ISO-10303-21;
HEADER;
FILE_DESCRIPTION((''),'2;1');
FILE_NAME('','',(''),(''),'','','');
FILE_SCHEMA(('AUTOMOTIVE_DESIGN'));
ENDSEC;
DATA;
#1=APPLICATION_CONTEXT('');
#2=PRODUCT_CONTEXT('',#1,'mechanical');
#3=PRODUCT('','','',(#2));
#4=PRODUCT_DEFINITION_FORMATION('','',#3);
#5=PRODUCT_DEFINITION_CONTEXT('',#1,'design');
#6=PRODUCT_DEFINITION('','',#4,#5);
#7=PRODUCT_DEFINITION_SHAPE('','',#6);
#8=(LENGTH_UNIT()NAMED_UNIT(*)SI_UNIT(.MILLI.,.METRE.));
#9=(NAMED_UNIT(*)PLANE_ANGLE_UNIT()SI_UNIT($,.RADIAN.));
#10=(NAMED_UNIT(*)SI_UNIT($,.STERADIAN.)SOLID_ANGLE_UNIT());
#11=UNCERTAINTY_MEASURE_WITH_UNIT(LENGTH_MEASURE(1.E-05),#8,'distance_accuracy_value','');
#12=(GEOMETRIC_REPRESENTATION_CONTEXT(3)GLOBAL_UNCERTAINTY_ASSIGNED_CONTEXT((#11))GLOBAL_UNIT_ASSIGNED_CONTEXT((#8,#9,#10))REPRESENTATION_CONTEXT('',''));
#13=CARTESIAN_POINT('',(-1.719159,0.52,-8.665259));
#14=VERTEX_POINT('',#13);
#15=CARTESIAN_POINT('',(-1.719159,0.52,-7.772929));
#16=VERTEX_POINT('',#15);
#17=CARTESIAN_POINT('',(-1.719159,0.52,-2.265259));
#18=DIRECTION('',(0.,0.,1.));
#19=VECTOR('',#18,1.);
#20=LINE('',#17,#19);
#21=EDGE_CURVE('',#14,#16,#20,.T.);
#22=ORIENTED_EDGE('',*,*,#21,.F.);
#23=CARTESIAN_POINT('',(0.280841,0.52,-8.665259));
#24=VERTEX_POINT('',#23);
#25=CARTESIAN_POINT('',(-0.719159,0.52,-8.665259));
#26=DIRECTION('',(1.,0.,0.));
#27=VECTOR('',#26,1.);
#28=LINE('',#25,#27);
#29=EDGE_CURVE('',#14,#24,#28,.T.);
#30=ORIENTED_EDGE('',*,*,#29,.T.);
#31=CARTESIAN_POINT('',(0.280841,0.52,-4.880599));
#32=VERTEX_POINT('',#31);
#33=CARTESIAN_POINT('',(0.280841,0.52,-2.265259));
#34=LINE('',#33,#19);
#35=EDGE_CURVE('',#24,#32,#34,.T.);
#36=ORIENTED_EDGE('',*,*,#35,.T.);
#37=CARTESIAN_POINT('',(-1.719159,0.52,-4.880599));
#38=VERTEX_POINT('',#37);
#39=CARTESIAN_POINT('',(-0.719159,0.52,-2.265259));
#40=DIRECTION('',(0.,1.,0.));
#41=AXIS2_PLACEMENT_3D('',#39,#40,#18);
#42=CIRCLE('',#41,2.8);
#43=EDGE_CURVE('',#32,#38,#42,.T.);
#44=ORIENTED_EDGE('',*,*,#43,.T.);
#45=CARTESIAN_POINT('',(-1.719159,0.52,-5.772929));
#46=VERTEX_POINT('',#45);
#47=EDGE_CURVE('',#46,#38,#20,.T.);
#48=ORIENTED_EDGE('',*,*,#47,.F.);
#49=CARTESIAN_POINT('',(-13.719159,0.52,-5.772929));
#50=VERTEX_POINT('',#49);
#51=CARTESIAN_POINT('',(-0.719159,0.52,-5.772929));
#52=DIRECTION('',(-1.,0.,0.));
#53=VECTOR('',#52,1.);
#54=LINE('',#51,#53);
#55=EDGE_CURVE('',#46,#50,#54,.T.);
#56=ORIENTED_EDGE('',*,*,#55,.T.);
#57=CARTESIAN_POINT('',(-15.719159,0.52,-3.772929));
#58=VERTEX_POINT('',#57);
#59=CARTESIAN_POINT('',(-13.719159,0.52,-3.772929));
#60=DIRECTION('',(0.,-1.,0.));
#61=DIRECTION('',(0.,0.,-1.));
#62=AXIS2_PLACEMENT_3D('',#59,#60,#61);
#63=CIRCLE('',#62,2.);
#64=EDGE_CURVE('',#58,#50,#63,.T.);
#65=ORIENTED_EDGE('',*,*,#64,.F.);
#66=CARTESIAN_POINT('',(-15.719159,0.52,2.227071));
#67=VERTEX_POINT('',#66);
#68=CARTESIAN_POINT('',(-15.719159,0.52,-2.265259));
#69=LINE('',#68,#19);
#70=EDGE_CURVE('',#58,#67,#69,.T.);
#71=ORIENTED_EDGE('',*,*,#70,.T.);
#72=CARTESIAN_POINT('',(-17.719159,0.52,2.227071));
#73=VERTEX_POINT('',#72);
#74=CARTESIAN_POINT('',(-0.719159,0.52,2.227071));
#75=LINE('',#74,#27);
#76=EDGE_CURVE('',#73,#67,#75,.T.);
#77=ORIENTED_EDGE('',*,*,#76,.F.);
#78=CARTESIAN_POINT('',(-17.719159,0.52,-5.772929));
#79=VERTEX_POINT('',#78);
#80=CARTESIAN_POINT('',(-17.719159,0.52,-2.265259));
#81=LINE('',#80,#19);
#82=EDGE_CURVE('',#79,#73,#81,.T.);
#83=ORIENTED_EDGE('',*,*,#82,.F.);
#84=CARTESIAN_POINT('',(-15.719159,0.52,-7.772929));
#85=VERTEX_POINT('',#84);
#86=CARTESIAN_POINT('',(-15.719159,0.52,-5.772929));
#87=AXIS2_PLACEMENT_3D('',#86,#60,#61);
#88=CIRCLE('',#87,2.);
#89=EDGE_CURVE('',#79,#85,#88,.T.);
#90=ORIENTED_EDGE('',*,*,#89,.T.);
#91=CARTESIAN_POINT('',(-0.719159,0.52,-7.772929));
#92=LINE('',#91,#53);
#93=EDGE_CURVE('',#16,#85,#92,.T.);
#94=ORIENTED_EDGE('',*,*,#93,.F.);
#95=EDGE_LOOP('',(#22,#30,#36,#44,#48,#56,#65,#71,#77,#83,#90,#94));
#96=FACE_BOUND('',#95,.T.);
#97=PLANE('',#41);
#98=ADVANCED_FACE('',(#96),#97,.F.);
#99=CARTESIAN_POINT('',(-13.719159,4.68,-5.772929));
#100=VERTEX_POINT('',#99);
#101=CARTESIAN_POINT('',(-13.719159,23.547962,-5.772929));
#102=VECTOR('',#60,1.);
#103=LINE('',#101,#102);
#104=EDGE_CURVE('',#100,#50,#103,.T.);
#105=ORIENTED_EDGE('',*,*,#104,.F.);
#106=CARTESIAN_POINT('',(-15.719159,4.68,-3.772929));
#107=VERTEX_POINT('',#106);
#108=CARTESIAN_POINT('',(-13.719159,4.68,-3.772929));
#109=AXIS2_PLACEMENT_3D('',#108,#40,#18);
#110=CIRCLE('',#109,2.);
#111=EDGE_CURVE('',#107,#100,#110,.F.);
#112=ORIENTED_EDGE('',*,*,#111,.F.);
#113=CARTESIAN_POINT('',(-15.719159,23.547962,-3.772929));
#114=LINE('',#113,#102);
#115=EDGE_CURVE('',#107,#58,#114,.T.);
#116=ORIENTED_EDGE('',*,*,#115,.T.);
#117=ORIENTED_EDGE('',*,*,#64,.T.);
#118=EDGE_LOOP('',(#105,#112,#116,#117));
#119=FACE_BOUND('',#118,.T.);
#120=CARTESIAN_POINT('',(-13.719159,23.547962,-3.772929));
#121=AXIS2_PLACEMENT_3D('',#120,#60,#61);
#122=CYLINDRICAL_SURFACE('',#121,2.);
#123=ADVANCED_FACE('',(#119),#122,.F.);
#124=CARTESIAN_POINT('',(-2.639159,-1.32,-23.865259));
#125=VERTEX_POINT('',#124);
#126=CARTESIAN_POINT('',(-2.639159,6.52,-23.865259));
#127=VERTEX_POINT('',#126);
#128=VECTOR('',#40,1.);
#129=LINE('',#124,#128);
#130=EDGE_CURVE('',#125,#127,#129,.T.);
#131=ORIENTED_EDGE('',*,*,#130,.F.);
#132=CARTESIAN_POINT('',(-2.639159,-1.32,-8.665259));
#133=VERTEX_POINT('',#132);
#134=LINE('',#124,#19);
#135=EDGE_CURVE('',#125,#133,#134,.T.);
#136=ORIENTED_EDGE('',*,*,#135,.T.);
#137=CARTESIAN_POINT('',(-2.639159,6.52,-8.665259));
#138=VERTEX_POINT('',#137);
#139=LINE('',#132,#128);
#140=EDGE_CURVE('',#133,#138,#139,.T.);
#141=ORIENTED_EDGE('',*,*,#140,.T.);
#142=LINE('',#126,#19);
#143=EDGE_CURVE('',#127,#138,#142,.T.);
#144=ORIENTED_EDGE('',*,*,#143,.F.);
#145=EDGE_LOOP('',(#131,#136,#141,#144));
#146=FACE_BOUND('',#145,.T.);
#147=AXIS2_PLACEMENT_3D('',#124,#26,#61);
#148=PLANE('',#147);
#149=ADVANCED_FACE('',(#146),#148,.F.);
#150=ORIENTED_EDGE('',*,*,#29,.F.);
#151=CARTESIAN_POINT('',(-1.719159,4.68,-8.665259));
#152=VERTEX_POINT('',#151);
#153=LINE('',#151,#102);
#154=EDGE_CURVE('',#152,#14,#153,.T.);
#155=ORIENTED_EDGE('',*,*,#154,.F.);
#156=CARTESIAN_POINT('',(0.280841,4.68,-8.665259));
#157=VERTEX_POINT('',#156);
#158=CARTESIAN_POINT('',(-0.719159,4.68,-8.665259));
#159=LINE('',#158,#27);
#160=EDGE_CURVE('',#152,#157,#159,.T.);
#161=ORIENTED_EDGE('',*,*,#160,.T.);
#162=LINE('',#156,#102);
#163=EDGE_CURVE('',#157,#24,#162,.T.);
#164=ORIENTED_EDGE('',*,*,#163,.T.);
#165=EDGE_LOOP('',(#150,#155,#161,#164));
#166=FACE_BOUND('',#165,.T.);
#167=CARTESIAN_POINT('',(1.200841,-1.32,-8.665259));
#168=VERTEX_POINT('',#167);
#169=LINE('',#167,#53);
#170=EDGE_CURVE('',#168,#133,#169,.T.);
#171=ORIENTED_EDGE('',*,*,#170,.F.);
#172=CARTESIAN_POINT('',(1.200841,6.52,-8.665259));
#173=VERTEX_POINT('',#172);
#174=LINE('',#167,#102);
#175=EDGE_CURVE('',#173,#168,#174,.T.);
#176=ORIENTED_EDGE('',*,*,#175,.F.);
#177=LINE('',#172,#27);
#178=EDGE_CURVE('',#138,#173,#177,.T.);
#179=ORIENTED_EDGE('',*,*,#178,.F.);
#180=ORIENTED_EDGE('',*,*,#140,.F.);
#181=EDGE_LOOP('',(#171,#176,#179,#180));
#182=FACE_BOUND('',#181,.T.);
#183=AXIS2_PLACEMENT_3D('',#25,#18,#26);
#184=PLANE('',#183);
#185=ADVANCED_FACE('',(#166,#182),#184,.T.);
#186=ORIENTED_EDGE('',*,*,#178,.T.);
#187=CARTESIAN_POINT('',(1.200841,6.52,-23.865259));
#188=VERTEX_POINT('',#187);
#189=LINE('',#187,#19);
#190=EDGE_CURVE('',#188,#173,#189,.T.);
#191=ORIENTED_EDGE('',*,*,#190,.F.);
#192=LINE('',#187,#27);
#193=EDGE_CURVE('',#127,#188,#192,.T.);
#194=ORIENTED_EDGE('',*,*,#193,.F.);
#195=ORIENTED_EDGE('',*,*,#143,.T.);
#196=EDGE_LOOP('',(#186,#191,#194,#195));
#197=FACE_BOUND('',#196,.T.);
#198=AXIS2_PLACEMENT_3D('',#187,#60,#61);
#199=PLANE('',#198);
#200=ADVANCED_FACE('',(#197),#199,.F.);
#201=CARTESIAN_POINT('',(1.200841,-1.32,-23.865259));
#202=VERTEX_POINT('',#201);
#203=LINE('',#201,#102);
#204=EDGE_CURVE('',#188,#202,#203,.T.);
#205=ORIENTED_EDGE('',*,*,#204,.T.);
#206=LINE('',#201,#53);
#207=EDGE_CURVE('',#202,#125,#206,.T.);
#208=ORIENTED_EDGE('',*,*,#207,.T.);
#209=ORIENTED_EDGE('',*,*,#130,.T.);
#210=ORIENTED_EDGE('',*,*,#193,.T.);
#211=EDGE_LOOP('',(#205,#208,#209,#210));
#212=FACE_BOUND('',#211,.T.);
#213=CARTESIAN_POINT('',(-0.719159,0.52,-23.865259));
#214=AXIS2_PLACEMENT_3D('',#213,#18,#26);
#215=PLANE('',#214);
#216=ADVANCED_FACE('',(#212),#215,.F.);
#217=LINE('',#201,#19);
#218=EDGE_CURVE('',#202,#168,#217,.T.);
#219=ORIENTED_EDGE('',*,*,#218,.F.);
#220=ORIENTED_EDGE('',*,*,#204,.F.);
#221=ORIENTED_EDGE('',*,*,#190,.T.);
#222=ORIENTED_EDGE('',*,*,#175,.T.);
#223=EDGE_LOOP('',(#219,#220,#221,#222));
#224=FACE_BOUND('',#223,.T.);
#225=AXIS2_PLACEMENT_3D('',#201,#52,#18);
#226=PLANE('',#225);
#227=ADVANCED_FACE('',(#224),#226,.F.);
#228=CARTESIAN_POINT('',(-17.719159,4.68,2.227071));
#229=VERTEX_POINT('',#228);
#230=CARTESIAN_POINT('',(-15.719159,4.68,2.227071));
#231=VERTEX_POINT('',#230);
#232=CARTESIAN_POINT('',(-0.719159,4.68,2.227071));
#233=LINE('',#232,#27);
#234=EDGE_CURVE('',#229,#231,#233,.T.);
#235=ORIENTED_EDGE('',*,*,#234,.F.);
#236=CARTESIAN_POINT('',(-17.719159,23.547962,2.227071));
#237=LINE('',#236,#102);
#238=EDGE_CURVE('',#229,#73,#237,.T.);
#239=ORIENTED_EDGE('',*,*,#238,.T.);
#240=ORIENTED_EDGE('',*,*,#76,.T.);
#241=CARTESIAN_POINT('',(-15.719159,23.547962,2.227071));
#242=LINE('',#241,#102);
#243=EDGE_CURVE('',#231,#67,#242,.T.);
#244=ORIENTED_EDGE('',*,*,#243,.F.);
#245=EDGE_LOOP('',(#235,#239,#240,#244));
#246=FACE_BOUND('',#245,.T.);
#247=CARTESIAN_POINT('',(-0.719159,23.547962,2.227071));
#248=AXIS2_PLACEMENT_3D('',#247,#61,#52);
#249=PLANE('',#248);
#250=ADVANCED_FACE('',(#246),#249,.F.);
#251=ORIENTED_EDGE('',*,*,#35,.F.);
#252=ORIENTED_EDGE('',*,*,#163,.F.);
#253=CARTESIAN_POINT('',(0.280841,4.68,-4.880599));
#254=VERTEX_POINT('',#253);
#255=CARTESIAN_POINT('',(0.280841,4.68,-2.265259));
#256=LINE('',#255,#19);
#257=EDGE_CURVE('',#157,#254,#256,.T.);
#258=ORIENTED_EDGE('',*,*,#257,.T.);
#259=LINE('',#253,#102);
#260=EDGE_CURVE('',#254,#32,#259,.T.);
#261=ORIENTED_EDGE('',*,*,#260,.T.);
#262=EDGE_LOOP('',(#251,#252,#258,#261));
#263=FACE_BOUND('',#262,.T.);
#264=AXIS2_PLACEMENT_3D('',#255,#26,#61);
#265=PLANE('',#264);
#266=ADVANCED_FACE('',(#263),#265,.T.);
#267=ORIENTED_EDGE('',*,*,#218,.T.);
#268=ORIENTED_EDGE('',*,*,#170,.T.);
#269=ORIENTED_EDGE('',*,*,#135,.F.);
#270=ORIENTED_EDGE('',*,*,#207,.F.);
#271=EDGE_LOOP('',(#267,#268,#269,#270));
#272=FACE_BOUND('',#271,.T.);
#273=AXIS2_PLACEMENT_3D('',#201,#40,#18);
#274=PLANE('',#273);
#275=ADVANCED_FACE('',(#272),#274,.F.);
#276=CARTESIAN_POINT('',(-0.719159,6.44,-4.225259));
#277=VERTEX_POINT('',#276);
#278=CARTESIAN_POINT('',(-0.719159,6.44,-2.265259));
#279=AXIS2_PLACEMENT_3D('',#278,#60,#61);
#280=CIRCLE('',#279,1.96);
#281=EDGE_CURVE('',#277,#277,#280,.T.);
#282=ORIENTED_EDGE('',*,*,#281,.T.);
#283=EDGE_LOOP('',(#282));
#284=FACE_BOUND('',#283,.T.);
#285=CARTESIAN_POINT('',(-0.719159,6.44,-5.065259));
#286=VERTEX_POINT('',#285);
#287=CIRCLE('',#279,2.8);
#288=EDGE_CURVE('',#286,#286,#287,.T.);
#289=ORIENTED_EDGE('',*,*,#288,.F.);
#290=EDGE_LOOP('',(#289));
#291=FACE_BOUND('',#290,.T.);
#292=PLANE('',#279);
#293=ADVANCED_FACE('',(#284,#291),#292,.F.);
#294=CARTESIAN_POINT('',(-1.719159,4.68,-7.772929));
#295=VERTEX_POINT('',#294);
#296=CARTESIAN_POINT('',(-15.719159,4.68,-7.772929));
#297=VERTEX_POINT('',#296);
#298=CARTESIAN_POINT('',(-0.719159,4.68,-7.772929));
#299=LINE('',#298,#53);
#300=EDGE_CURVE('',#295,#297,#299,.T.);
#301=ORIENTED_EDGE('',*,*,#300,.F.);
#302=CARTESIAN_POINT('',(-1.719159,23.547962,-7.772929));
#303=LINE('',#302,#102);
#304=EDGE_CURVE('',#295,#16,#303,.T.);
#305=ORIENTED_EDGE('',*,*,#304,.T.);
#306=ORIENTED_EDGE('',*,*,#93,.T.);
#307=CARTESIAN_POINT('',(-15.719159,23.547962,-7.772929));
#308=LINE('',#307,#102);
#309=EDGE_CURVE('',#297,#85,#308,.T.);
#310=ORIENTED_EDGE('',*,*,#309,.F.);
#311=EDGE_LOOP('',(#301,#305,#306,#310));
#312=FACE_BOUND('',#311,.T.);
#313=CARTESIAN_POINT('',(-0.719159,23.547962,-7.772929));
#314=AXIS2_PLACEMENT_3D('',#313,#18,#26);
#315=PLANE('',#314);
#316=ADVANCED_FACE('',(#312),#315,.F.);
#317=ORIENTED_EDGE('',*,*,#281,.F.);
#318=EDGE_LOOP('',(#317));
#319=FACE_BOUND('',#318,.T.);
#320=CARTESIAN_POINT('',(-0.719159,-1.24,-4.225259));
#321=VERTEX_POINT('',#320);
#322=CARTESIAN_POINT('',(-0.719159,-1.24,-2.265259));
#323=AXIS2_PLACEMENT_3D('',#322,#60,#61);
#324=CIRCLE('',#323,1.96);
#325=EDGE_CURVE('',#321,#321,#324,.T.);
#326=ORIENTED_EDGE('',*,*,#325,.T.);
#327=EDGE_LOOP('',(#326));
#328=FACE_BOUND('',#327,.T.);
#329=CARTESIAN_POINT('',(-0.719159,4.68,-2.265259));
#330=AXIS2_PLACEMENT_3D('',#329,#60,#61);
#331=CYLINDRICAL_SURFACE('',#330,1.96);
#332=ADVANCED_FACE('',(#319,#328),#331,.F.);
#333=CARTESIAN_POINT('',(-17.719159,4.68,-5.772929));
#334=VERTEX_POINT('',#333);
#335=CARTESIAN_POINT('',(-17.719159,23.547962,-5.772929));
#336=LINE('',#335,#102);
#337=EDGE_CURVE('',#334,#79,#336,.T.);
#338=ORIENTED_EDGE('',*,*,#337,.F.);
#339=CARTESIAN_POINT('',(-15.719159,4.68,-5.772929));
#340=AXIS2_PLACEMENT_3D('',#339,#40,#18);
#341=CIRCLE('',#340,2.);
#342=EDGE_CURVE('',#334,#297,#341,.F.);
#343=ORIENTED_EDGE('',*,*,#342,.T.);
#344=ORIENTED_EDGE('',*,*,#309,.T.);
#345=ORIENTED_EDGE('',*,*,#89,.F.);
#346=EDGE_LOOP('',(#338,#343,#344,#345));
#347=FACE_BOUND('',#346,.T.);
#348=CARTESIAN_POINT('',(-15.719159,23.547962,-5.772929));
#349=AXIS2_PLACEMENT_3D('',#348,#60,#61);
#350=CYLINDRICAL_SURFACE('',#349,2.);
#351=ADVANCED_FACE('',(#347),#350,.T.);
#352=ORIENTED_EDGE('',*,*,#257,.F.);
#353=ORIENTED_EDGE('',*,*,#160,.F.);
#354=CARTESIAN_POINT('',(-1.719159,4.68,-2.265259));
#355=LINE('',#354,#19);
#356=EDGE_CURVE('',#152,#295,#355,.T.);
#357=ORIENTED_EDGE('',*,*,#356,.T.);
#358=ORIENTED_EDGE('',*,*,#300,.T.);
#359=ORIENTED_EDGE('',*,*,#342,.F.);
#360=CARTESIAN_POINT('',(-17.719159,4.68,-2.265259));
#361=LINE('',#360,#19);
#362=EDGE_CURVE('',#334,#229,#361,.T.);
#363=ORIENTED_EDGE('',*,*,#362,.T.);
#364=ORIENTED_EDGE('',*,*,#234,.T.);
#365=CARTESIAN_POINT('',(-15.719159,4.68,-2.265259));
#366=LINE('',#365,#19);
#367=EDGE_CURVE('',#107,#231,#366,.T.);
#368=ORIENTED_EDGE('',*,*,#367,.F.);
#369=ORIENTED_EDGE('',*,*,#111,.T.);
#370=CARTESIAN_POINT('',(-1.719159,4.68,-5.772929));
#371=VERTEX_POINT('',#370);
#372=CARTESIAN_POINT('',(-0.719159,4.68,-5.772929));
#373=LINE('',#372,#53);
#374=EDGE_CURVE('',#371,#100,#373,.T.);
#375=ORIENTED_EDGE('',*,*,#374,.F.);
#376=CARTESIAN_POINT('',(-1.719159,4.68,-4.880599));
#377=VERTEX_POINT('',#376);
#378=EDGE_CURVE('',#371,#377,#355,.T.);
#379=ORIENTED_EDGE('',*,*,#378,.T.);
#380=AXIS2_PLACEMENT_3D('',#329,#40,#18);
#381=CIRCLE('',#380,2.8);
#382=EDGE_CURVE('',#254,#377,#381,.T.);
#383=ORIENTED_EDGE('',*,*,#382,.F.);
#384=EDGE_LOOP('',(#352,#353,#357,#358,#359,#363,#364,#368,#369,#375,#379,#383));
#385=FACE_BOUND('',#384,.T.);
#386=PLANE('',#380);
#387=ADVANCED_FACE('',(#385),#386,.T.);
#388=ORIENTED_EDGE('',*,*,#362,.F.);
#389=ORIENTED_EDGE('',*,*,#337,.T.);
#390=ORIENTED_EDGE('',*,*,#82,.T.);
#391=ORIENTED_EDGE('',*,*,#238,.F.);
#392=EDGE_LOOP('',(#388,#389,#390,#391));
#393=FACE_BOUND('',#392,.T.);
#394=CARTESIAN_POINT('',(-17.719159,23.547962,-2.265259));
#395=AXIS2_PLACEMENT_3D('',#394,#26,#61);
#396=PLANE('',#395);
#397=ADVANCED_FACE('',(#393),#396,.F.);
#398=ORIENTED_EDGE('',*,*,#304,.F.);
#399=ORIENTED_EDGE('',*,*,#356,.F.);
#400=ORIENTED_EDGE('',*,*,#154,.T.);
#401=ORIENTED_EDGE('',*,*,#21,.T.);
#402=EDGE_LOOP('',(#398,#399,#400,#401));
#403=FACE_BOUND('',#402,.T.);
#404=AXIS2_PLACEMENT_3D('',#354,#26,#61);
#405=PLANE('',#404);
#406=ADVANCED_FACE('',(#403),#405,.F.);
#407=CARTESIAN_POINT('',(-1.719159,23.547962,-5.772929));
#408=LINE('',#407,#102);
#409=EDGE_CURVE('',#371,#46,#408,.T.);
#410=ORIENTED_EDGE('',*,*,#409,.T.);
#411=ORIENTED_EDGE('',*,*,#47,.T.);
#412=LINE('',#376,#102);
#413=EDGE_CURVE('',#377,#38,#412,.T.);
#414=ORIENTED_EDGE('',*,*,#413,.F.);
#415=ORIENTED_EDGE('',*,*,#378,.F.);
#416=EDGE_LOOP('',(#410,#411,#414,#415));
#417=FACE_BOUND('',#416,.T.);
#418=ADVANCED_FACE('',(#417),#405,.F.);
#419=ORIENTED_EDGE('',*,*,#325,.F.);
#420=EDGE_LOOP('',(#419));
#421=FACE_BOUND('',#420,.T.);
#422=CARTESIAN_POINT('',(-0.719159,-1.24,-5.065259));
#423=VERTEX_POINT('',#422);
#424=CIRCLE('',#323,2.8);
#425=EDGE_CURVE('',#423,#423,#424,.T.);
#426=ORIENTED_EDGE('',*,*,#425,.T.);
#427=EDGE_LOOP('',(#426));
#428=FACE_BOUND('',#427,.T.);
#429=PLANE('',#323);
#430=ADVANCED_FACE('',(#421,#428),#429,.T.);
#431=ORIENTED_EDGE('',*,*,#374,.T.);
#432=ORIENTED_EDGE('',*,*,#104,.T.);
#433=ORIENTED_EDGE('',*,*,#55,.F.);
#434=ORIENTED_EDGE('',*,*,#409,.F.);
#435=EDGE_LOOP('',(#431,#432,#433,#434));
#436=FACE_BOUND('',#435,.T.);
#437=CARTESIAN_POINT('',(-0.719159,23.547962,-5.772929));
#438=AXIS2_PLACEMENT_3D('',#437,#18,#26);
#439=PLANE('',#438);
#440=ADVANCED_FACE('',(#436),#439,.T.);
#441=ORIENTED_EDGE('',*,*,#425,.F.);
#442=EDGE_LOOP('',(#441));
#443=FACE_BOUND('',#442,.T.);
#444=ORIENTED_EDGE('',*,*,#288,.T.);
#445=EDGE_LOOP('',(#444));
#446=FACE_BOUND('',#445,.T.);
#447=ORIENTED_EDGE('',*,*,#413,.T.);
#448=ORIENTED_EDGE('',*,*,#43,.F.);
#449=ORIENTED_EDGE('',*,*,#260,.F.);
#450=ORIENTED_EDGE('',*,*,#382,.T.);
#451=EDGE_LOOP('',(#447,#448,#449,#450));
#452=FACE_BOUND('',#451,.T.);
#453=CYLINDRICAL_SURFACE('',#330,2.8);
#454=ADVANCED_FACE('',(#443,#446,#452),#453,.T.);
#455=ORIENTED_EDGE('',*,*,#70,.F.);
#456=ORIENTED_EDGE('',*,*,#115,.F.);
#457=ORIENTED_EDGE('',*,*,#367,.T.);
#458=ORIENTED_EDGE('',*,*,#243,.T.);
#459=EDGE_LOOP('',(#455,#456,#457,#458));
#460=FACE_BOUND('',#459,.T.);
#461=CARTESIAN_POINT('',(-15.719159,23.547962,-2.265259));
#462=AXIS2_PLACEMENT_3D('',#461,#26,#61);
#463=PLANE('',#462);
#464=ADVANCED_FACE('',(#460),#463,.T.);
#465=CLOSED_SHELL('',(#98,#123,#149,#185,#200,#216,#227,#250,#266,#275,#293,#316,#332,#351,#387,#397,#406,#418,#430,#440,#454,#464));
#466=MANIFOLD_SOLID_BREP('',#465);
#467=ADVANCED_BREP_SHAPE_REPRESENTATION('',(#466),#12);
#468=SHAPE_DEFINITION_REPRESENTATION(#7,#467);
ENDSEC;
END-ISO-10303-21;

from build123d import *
from build123d.topology import SkipClean

# Parameters (mm, degrees)
SKETCH1_R                = 3.5
SKETCH1_R_2              = 2.45
HOLE_DEPTH               = 5.2
SKETCH2_W                = 2.5
SKETCH2_H                = 4.5
BOSS_EXTRUDE2_DEPTH      = 5.2
SKETCH3_W                = 4.8
SKETCH3_H                = 9.8
BOSS_EXTRUDE3_DEPTH      = 19
LEVER_ARM_DEPTH          = 5.2
BOSS_EXTRUDE4_DEPTH      = 2.2
BOSS_EXTRUDE4_DEPTH_BACK = 7.4
SKETCH6_R                = 3.5
SKETCH6_R_2              = 2.45
SCALE1_SCALE             = 0.8


with BuildPart() as part:
    # Sketch1 → hole (new body)
    with BuildSketch(Plane(origin=(0, 0, 0), x_dir=(1, 0, 0), z_dir=(0, 1, 0))):
        with Locations(Location((0, 0, 0), (0, 0, 270))):
            Circle(SKETCH1_R)
        with Locations(Location((0, 0, 0), (0, 0, 270))):
            Circle(SKETCH1_R_2, mode=Mode.SUBTRACT)
    extrude(amount=HOLE_DEPTH)

    # Sketch2 → Boss-Extrude2 (add)
    with BuildSketch(Plane.XZ):
        with Locations((0, -5.75)):
            Rectangle(SKETCH2_W, SKETCH2_H)
        with BuildLine():
            ThreePointArc((1.25, -3.269174208), (0.635566784, -3.441809824), (0, -3.5))
            Line((0, -3.5), (1.25, -3.5))
            Line((1.25, -3.5), (1.25, -3.269174208))
        make_face()
        with BuildLine():
            Line((-1.25, -3.269174208), (-1.25, -3.5))
            Line((-1.25, -3.5), (0, -3.5))
            ThreePointArc((0, -3.5), (-0.635566784, -3.441809824), (-1.25, -3.269174208))
        make_face()
    extrude(amount=-BOSS_EXTRUDE2_DEPTH)

    # Sketch3 → Boss-Extrude3 (add)
    with BuildSketch(Plane(origin=(0, 0, -8), x_dir=(-1, 0, 0), z_dir=(0, 0, -1))):
        with Locations((0, 2.6)):
            Rectangle(SKETCH3_W, SKETCH3_H)
    extrude(amount=BOSS_EXTRUDE3_DEPTH)

    # Sketch5 → lever arm (add)
    with BuildSketch(Plane.XZ):
        Polygon((-18.75, -6.884587104), (-1.25, -6.884587104), (-1.25, -4.384587104), (-16.25, -4.384587104), (-18.75, -4.384587104), align=None)
        with BuildLine():
            ThreePointArc((-21.25, -4.384587104), (-20.517766953, -6.152354057), (-18.75, -6.884587104))
            Line((-18.75, -6.884587104), (-18.75, -4.384587104))
            Line((-18.75, -4.384587104), (-21.25, -4.384587104))
        make_face()
        with BuildLine():
            Line((-18.75, -1.884587104), (-18.75, -4.384587104))
            Line((-18.75, -4.384587104), (-16.25, -4.384587104))
            ThreePointArc((-16.25, -4.384587104), (-18.017766953, -3.652354057), (-18.75, -1.884587104))
        make_face()
        Polygon((-21.25, -4.384587104), (-18.75, -4.384587104), (-18.75, -1.884587104), (-18.75, 5.615412896), (-21.25, 5.615412896), align=None)
    extrude(amount=-LEVER_ARM_DEPTH)

    # Sketch6 → Boss-Extrude4 (add, two sides: drawn at the far end of the back side and taken through both)
    with SkipClean():  # the faces are left unmerged after this step: merging them gives an invalid solid
        with BuildSketch(Plane.XZ.offset(-BOSS_EXTRUDE4_DEPTH_BACK)):
            with Locations(Location((0, 0, 0), (0, 0, 270))):
                Circle(SKETCH6_R)
            with Locations(Location((0, 0, 0), (0, 0, 270))):
                Circle(SKETCH6_R_2, mode=Mode.SUBTRACT)
        extrude(amount=BOSS_EXTRUDE4_DEPTH + BOSS_EXTRUDE4_DEPTH_BACK)
    add(part.part.scale(1), mode=Mode.REPLACE)  # the faces are merged on a copy


with BuildPart() as part_1:
    # Scale1: scaled about (-3.5957974, 2.6, -11.326296727)
    add(part.part.scale(SCALE1_SCALE).moved(Location((-0.71915948, 0.52, -2.265259345))))


solid = part_1.part
